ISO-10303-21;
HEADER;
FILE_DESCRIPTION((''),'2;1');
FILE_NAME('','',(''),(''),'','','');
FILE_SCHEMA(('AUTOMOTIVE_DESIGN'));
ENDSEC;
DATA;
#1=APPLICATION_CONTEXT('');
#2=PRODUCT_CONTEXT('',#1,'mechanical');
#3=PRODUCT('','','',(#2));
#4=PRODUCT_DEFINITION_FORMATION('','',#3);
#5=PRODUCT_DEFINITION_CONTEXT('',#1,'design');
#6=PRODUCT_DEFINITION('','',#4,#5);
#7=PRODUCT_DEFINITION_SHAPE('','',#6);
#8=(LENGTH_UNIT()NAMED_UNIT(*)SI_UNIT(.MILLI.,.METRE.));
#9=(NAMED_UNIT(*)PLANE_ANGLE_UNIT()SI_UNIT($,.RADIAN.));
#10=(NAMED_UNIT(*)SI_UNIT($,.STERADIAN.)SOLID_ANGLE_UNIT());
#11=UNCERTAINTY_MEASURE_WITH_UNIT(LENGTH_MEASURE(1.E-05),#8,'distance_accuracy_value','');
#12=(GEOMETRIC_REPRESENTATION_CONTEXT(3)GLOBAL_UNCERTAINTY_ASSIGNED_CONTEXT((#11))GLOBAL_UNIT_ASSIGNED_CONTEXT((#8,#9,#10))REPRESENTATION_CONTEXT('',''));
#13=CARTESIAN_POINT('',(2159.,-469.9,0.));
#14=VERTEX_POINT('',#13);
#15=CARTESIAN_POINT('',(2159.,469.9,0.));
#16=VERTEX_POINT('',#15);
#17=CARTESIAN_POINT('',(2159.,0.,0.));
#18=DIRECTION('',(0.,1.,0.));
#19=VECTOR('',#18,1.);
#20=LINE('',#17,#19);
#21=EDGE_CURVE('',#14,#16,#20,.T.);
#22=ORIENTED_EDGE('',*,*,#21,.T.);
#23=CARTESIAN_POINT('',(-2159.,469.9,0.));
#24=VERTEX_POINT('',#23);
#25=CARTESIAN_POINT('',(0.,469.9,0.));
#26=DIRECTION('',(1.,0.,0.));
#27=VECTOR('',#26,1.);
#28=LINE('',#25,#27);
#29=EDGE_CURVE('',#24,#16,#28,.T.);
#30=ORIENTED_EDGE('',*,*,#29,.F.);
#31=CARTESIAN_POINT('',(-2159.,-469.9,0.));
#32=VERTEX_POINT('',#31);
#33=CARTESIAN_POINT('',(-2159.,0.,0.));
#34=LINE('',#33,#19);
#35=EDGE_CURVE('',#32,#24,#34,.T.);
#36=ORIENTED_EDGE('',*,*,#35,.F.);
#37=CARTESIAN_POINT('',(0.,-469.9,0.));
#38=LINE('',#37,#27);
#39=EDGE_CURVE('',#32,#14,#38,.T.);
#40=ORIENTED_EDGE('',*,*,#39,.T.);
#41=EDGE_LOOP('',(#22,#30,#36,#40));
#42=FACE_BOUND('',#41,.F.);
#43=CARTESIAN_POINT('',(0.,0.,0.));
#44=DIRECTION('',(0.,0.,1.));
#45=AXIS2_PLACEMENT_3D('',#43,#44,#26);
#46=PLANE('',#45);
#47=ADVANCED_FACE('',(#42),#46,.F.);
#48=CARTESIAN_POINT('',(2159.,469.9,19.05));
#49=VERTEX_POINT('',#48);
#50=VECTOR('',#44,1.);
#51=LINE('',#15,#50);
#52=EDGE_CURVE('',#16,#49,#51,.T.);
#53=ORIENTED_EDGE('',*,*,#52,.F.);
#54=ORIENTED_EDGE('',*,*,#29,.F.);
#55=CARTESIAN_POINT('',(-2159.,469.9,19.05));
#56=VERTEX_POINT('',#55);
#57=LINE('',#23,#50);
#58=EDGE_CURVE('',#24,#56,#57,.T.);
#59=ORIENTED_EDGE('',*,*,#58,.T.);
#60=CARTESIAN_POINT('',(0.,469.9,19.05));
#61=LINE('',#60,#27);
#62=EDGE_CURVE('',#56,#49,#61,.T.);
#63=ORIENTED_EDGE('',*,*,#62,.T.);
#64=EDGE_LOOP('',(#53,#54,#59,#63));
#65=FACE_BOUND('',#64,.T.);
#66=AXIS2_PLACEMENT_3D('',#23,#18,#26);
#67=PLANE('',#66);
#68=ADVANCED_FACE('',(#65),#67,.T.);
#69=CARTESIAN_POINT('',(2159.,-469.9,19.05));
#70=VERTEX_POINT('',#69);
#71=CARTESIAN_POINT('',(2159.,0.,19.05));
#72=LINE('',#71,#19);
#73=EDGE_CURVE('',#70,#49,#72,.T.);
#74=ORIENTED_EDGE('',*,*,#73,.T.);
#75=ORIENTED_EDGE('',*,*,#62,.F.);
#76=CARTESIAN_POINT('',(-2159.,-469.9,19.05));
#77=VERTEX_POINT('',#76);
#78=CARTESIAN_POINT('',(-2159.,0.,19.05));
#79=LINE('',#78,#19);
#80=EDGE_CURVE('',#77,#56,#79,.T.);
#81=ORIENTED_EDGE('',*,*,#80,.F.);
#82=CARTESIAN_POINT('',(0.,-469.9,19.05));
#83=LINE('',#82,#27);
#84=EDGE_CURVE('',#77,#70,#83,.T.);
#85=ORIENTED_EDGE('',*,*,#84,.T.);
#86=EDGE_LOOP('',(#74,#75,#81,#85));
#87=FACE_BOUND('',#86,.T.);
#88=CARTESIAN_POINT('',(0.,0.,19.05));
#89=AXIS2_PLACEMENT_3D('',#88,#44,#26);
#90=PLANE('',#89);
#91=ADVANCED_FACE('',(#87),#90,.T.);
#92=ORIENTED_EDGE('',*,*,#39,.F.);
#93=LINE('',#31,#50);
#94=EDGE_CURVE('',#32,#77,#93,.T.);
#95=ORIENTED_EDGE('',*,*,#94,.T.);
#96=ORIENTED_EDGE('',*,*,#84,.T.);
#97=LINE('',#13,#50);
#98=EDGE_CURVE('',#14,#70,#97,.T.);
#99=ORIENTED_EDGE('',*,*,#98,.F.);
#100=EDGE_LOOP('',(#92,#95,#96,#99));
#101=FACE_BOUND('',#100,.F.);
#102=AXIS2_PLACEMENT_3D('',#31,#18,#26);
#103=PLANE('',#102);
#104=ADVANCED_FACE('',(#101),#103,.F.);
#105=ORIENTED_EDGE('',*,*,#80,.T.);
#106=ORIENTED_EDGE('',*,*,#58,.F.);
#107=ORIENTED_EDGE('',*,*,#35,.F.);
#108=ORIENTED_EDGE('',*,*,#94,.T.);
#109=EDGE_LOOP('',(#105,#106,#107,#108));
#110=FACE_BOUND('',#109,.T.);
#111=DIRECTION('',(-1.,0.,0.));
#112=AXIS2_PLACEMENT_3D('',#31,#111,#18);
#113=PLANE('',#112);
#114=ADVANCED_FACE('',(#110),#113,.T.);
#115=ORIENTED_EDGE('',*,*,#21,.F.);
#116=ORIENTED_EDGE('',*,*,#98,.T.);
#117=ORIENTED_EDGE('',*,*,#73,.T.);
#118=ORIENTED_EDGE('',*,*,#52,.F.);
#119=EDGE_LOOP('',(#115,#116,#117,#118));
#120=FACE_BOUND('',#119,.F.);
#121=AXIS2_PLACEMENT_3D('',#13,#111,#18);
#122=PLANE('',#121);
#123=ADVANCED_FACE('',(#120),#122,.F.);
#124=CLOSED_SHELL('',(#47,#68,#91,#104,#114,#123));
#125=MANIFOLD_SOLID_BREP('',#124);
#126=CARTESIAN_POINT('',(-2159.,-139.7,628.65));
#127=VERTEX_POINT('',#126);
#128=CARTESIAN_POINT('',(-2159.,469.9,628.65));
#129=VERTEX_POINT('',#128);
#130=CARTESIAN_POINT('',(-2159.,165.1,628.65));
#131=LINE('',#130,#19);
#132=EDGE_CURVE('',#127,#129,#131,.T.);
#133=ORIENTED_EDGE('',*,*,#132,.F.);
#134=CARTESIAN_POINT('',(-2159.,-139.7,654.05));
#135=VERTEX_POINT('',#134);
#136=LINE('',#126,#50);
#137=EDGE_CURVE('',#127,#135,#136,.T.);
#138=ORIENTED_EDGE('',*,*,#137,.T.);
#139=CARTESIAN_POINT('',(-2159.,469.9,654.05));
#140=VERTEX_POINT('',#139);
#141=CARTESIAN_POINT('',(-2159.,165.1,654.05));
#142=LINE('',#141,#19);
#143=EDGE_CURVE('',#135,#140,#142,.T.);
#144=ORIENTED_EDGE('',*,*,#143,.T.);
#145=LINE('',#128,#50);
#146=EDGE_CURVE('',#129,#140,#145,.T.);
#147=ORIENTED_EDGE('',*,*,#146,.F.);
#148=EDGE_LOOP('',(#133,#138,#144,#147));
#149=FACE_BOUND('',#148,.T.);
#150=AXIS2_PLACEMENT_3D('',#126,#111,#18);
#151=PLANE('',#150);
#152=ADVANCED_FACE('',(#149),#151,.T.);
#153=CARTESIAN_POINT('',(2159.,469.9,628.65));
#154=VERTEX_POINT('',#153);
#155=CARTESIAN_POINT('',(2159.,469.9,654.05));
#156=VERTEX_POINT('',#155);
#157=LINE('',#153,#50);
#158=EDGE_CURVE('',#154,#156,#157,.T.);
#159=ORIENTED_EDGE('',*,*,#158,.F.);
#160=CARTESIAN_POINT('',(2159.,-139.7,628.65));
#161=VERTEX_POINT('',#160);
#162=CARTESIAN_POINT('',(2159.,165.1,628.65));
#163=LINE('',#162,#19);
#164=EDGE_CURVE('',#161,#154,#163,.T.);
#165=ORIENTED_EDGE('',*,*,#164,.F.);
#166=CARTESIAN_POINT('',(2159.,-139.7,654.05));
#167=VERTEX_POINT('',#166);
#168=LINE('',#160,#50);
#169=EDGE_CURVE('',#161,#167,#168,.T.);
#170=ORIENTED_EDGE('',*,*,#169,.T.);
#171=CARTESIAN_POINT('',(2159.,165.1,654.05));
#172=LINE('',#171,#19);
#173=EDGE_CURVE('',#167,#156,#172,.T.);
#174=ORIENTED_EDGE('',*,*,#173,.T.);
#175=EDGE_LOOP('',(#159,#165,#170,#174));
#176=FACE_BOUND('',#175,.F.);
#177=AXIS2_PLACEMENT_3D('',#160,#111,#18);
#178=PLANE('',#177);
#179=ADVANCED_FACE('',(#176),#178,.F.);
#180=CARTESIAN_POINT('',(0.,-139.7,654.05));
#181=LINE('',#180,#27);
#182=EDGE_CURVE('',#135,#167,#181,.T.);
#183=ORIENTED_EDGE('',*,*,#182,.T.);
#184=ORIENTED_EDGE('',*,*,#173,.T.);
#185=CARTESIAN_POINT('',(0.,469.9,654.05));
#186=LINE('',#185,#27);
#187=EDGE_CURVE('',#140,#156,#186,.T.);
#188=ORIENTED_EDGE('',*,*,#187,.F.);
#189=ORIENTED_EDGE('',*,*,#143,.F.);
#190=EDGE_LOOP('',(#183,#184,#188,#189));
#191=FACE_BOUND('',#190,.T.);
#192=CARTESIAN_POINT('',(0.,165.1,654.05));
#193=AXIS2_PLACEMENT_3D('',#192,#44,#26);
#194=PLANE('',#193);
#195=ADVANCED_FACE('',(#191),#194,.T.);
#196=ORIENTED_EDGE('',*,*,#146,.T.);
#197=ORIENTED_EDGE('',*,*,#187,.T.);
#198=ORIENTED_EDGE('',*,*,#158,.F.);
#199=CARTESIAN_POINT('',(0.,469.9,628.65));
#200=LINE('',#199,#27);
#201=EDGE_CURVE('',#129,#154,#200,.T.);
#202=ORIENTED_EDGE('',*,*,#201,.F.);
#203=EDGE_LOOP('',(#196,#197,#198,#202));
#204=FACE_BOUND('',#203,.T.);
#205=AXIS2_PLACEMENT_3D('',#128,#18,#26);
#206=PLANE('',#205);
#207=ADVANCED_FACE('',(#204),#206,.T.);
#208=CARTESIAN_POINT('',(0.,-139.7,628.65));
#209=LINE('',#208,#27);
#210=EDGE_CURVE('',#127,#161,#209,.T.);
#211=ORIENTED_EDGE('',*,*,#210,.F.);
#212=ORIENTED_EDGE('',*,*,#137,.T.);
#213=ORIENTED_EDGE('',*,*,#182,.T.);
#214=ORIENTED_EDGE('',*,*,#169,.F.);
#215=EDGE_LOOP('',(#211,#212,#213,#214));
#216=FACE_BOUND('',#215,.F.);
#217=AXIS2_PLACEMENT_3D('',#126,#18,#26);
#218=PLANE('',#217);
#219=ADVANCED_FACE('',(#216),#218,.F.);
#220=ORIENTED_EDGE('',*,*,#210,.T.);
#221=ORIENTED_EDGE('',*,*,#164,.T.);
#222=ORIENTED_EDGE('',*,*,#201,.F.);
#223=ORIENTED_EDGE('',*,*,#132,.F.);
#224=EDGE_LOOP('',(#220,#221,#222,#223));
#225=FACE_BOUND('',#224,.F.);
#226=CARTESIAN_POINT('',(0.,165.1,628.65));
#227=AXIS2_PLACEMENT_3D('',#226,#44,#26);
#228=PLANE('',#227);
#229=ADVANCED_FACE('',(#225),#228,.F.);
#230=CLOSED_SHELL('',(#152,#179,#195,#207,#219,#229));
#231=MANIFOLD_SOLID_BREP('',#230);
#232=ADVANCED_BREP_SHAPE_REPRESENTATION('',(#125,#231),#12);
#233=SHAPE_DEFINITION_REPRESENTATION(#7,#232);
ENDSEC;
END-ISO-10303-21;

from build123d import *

# Parameters (mm, degrees)
F0_W     = 4318
F0_H     = 939.8
F1_DEPTH = 19.05
F7_W     = 4318
F7_H     = 609.6
F8_DEPTH = 25.4


# Not quite as in the source:
# - the program builds the solid bodies; features that only make, move or delete a surface that nothing else refers to are left out


with BuildPart() as f1:
    # F0 (on Top) → F1 (new body)
    with BuildSketch(Plane.XY):
        Rectangle(F0_W, F0_H)
    extrude(amount=F1_DEPTH)


with BuildPart() as f8:
    # F7 (on offset) → F8 (new body)
    with BuildSketch(Plane.XY.offset(628.65)):
        with Locations((0, 165.1)):
            Rectangle(F7_W, F7_H)
    extrude(amount=F8_DEPTH)


solid = Compound([f1.part, f8.part])
